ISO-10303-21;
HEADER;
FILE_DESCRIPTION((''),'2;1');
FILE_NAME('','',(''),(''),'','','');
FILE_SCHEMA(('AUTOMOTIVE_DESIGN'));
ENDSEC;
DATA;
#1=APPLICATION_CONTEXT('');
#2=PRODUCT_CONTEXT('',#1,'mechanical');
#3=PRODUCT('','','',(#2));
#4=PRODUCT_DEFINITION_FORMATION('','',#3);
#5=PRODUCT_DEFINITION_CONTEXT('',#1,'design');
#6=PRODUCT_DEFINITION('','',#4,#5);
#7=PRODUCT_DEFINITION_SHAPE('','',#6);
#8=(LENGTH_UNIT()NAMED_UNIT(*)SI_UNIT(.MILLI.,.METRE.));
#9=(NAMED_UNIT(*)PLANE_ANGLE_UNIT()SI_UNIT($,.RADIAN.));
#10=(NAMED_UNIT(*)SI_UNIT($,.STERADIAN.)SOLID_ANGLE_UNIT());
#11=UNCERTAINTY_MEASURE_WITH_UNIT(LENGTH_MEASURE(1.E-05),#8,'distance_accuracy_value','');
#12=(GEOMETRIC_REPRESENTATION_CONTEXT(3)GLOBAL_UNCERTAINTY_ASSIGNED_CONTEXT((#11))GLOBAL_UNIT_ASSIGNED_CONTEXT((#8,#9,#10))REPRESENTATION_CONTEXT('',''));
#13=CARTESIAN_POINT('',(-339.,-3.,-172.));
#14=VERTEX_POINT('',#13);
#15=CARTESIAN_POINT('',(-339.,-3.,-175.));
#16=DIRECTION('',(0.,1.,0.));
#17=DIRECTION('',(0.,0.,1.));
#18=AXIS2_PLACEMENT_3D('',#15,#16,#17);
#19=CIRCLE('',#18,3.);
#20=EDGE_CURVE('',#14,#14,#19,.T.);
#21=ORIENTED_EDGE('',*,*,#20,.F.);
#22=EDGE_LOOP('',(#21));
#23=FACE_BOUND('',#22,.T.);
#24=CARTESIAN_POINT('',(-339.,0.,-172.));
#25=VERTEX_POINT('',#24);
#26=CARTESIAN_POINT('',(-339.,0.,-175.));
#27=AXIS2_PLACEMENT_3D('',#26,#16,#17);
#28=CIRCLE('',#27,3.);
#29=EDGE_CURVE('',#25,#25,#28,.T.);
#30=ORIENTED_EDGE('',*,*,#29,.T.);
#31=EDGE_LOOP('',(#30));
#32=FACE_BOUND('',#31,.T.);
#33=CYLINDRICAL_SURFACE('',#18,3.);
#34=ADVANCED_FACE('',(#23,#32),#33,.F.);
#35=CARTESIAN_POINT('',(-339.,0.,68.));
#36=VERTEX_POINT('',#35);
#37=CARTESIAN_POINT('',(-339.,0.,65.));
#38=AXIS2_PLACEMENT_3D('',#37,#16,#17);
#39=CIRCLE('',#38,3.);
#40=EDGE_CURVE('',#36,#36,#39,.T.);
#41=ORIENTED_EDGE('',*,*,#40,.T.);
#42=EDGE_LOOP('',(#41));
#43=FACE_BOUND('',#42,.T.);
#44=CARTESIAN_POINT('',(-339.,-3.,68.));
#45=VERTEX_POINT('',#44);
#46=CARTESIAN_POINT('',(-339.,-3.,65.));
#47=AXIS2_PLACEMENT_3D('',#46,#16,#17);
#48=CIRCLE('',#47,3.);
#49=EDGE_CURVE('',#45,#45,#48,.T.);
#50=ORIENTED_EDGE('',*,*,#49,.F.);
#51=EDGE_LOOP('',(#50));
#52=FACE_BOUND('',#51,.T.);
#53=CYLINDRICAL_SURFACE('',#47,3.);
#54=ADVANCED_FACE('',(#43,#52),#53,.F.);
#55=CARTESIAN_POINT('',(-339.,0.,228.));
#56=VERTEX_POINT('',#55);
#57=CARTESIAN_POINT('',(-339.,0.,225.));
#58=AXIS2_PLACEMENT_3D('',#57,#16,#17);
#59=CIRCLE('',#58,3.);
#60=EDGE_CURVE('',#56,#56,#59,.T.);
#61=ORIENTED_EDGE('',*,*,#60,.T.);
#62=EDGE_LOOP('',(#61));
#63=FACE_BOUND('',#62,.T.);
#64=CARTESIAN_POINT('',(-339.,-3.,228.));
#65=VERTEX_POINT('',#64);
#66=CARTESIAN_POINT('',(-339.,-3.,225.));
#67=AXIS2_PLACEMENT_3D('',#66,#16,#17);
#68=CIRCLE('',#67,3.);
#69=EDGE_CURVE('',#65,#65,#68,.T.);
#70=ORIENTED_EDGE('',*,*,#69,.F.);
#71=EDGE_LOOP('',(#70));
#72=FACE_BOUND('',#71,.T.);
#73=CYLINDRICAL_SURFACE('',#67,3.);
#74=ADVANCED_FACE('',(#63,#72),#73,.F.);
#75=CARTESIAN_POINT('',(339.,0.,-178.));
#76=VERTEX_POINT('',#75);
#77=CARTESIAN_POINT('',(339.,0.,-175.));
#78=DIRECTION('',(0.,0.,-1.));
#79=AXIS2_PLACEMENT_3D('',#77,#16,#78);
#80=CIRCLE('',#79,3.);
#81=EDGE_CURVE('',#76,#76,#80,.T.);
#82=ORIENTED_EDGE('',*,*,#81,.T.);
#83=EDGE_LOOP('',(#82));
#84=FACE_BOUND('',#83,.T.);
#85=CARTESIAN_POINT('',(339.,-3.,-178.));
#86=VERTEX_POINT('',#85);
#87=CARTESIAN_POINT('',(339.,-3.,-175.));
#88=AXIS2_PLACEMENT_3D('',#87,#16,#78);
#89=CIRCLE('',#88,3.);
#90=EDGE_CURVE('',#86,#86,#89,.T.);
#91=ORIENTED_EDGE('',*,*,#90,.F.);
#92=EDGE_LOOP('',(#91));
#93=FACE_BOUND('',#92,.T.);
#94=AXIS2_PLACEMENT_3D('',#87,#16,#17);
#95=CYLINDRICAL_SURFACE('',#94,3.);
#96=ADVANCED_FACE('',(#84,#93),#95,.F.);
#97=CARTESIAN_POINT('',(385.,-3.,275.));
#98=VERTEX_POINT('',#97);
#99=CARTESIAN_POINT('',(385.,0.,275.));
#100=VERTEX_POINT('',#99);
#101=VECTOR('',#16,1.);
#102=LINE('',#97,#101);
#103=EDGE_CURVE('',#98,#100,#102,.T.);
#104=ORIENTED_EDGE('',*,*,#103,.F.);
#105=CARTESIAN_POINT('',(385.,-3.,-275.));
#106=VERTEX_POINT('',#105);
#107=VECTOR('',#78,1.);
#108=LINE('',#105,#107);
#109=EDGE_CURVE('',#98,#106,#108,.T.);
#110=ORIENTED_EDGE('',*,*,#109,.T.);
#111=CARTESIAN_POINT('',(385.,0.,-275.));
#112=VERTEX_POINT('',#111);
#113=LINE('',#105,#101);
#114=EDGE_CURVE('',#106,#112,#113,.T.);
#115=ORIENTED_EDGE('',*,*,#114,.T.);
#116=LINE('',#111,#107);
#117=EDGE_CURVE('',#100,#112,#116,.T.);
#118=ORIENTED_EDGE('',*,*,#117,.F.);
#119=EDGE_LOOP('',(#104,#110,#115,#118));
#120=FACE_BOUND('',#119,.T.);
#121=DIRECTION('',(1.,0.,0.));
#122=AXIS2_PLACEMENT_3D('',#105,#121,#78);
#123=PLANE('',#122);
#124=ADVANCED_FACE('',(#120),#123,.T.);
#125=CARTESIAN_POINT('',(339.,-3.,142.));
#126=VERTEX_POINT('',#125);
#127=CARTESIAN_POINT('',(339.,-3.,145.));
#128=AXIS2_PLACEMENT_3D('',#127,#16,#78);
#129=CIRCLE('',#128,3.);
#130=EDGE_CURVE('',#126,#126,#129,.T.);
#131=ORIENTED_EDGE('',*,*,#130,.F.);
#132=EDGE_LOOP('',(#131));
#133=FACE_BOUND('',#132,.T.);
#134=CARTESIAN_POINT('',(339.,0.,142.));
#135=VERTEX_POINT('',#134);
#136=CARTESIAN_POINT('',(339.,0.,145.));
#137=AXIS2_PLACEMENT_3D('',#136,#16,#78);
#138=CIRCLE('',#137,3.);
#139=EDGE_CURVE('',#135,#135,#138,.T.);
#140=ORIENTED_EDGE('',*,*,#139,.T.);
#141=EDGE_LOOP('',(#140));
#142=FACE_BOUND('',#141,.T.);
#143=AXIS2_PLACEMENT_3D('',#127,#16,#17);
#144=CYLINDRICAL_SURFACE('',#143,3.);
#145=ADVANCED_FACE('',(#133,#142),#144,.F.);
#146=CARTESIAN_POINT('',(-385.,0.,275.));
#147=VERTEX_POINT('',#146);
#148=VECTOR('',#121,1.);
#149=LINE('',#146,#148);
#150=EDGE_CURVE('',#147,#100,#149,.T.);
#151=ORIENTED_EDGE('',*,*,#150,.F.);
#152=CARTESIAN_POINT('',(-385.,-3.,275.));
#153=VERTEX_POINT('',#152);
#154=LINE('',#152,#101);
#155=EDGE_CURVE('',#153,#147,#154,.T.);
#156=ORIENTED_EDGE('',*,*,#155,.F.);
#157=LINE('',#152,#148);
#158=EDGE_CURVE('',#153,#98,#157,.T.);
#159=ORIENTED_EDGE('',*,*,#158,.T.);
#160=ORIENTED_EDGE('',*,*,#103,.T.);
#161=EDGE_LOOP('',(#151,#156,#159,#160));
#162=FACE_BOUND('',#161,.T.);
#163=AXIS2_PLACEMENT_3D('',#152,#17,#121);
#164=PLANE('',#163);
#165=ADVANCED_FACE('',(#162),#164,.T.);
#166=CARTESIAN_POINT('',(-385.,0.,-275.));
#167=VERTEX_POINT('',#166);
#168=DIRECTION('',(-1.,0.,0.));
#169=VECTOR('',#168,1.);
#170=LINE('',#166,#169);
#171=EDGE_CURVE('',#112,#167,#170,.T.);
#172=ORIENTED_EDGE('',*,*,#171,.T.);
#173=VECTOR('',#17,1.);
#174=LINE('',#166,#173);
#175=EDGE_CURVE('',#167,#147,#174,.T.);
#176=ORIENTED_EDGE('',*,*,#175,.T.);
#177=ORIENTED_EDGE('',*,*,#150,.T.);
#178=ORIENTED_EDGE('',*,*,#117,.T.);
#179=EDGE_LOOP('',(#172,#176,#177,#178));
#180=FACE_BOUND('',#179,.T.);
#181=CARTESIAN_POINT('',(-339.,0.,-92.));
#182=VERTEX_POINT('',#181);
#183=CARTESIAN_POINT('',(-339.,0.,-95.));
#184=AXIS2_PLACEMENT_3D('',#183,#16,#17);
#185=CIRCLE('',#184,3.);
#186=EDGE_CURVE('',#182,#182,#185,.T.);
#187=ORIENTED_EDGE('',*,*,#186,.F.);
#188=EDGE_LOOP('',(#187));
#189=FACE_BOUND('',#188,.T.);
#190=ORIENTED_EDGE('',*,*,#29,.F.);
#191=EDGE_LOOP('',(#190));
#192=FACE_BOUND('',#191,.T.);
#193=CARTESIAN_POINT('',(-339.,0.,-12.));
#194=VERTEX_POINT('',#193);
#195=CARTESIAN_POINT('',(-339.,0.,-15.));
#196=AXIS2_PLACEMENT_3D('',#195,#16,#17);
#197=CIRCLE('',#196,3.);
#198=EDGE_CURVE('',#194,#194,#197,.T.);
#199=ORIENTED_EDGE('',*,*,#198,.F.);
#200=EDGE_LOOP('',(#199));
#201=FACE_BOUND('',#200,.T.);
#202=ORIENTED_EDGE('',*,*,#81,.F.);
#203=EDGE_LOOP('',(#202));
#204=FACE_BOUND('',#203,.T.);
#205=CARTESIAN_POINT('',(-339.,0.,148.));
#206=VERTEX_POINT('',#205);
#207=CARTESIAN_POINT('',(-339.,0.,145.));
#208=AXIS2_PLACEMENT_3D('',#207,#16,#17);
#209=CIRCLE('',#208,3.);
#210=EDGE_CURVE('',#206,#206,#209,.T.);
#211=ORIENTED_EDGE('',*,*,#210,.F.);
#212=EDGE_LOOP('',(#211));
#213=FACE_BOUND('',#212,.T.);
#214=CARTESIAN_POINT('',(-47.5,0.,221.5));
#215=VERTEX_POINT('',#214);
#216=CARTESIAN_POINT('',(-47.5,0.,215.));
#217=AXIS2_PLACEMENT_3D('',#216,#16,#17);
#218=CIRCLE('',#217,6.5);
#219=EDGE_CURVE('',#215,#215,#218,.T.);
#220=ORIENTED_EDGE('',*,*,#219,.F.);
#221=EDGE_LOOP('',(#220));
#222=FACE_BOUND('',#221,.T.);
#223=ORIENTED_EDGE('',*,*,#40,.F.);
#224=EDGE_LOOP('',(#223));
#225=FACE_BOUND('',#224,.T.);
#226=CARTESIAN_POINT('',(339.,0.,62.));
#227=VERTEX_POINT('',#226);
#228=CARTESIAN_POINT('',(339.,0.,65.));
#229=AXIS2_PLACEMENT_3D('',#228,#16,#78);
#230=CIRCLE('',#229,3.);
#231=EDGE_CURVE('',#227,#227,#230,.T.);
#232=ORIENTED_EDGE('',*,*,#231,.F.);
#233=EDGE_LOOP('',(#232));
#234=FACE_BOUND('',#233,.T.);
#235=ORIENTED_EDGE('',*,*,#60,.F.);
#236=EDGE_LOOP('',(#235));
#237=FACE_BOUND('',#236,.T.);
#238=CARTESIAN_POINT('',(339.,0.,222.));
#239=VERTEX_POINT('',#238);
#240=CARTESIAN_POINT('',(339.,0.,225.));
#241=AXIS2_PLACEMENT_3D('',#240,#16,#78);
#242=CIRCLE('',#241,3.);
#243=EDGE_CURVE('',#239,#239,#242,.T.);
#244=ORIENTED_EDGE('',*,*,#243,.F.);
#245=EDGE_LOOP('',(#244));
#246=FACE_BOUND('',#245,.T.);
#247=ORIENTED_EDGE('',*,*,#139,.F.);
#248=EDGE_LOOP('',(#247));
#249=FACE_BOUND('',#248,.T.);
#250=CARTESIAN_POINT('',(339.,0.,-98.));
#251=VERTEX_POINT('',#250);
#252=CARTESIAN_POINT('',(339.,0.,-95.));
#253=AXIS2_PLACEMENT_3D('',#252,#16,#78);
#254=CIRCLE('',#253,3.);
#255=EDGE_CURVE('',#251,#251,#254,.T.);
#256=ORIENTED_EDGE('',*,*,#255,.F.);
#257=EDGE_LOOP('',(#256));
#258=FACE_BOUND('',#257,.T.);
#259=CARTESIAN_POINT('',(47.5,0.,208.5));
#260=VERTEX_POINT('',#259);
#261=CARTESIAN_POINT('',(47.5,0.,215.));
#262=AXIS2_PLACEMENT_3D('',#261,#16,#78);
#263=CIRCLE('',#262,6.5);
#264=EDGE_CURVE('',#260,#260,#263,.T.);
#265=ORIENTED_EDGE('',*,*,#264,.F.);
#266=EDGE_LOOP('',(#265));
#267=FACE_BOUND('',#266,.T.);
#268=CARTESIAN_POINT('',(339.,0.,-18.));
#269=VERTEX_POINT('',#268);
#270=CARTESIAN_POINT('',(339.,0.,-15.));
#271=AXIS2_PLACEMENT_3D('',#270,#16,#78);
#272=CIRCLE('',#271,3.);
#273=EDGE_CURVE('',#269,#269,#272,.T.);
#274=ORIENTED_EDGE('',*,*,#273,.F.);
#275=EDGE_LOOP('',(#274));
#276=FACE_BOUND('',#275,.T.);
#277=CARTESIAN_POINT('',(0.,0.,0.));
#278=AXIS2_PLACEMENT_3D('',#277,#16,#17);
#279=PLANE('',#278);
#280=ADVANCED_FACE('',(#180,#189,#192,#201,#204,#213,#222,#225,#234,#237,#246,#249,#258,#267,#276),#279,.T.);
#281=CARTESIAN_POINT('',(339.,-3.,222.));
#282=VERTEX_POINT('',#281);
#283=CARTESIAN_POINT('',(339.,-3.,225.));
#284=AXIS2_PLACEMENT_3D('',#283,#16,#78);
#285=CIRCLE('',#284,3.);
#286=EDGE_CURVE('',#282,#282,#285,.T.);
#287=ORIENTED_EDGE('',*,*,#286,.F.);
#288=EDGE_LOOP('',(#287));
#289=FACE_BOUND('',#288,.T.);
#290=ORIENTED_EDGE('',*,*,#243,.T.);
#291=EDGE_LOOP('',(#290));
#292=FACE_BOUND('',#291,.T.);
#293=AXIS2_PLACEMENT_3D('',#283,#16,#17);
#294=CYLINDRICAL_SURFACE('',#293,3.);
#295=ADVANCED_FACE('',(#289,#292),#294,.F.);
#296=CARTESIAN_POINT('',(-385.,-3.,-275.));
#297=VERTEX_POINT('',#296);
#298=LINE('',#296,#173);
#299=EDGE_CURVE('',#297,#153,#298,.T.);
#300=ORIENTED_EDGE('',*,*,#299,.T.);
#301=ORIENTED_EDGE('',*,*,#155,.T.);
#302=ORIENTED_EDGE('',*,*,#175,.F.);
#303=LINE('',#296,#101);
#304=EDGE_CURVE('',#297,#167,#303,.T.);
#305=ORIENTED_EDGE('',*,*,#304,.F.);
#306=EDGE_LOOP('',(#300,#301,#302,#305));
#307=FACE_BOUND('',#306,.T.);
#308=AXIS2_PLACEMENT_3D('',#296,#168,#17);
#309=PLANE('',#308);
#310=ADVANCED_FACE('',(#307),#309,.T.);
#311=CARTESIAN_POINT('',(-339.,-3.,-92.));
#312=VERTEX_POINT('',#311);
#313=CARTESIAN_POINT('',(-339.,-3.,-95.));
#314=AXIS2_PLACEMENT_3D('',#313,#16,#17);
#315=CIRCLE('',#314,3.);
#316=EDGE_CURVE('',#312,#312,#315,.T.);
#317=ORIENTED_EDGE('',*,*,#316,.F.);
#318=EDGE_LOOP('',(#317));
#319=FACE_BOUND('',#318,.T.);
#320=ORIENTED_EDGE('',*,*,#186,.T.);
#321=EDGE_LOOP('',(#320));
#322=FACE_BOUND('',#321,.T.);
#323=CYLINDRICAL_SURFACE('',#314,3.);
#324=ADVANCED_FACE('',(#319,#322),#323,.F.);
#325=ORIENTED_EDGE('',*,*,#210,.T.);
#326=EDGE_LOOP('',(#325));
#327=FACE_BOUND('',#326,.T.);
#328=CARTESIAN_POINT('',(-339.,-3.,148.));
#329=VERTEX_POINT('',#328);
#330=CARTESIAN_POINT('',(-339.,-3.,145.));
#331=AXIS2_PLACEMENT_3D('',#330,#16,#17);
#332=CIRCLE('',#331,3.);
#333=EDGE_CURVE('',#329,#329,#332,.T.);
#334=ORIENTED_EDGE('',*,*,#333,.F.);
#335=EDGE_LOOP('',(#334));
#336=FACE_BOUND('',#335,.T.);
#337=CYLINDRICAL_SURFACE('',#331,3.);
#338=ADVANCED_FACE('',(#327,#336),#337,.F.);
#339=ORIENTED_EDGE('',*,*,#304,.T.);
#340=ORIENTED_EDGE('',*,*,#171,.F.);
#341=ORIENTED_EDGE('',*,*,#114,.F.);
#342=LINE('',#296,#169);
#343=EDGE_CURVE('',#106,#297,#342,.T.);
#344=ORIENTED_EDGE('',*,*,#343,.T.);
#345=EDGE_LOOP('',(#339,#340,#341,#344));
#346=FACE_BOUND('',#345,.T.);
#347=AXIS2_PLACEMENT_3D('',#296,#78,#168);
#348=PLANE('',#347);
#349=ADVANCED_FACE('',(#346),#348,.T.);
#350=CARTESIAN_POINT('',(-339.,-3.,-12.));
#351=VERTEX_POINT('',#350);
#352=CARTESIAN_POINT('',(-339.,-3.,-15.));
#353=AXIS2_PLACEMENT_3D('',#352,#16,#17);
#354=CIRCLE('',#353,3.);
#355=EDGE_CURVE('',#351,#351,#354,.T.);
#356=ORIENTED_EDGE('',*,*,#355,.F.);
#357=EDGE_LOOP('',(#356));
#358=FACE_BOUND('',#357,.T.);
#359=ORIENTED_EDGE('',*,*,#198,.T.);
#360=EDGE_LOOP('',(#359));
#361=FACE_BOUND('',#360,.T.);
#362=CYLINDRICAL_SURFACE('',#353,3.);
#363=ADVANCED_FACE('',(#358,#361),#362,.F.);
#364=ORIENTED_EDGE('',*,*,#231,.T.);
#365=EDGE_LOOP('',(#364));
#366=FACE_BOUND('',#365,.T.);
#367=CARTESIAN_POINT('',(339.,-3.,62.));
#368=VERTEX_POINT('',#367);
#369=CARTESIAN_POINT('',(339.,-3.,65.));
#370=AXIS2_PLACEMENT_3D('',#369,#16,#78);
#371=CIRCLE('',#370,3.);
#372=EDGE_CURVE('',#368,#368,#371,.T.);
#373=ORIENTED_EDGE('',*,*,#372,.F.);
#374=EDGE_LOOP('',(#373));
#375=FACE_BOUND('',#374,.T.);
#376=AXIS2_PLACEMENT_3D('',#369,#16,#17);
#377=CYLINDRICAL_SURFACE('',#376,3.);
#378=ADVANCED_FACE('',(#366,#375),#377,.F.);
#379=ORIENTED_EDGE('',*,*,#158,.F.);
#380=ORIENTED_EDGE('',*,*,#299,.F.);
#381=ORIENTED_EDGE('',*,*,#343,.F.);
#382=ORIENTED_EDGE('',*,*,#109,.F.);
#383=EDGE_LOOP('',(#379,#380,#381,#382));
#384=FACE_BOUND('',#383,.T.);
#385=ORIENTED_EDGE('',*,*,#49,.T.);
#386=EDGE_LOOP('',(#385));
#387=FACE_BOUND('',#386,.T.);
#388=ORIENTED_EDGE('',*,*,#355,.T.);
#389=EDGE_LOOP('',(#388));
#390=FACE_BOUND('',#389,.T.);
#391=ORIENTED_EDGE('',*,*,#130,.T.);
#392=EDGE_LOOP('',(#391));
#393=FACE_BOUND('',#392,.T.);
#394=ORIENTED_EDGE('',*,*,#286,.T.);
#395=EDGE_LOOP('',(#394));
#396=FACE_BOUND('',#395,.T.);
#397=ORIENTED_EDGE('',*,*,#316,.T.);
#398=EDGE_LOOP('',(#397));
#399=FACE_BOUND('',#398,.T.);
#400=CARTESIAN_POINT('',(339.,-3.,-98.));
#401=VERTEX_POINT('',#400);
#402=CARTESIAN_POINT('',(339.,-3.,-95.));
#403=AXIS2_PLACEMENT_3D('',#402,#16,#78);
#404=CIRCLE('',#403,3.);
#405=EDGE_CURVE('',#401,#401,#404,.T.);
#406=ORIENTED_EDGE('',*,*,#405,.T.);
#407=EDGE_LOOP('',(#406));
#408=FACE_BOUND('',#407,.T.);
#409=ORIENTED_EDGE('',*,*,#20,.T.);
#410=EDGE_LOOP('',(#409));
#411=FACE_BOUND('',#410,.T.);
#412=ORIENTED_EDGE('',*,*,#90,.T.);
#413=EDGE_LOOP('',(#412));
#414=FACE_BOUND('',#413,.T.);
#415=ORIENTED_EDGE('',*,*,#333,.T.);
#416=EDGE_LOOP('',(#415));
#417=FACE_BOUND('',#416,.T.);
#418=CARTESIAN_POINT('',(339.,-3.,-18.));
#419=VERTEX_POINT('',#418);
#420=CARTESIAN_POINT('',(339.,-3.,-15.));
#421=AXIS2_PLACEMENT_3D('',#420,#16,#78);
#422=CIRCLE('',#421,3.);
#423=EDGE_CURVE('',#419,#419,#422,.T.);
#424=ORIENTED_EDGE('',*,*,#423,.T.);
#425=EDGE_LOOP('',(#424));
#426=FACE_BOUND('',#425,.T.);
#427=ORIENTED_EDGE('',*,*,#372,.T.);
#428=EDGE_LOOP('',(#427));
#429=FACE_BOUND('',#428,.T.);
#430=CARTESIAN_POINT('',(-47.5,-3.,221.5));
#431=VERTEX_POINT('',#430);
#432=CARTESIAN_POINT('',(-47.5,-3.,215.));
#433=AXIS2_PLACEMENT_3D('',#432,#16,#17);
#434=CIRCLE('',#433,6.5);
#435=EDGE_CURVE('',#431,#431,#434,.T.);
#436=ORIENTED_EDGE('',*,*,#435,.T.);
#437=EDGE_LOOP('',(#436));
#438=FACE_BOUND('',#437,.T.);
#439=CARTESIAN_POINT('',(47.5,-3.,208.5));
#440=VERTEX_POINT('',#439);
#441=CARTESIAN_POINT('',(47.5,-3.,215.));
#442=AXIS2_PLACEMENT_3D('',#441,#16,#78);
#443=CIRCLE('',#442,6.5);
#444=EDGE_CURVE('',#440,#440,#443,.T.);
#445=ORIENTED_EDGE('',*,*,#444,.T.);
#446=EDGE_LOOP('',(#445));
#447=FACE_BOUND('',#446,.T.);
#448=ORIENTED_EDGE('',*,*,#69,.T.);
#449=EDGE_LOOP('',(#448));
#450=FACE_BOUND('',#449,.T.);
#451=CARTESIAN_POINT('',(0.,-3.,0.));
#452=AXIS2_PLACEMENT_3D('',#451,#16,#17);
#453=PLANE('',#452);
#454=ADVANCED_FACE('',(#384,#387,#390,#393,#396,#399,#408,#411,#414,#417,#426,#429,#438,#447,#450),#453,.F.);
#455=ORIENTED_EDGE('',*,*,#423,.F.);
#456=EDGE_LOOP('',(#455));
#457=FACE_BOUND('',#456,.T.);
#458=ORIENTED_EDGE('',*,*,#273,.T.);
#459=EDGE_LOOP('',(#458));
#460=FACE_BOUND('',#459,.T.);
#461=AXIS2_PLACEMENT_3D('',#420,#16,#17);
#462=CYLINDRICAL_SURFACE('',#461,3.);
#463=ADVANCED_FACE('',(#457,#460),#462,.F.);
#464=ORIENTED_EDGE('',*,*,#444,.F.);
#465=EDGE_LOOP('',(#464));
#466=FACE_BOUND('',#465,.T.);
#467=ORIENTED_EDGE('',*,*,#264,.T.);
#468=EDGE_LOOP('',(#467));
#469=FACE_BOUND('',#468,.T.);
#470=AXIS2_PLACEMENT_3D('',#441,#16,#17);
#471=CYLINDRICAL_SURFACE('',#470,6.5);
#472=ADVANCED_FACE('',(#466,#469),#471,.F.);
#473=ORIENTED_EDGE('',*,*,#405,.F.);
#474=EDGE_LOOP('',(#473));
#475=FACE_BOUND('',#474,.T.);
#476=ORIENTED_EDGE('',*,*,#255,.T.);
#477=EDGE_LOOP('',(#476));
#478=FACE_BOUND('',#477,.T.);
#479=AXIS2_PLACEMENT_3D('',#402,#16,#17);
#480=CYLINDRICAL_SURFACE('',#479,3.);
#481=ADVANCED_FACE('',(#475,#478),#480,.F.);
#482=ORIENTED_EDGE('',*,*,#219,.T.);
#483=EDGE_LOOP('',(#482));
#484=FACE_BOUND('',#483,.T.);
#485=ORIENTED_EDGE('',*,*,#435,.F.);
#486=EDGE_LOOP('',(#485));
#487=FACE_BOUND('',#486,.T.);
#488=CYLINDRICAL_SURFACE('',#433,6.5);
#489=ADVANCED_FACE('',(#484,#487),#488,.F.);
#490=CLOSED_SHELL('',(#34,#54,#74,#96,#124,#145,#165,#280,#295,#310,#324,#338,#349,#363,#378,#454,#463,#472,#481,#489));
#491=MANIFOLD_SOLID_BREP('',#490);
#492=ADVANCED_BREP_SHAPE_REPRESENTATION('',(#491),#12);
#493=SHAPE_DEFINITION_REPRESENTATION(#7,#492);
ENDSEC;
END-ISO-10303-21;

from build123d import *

# Parameters (mm, degrees)
SKETCH1_W          = 770
SKETCH1_H          = 550
SKETCH1_R          = 3
SKETCH1_R_2        = 6.5
BASE_FLANGE1_DEPTH = 3


# Sheet-metal steps are written as plain solids
with BuildPart() as part:
    # Sketch1 → Base-Flange1 (new body)
    with BuildSketch(Plane(origin=(0, 0, 0), x_dir=(1, 0, 0), z_dir=(0, 1, 0))):
        Rectangle(SKETCH1_W, SKETCH1_H)
        with Locations(Location((-339, 175, 0), (0, 0, 270))):
            Circle(SKETCH1_R, mode=Mode.SUBTRACT)
        with Locations(Location((-339, 95, 0), (0, 0, 270))):
            Circle(SKETCH1_R, mode=Mode.SUBTRACT)
        with Locations(Location((-339, 15, 0), (0, 0, 270))):
            Circle(SKETCH1_R, mode=Mode.SUBTRACT)
        with Locations(Location((-339, -65, 0), (0, 0, 270))):
            Circle(SKETCH1_R, mode=Mode.SUBTRACT)
        with Locations(Location((-339, -145, 0), (0, 0, 270))):
            Circle(SKETCH1_R, mode=Mode.SUBTRACT)
        with Locations(Location((-339, -225, 0), (0, 0, 270))):
            Circle(SKETCH1_R, mode=Mode.SUBTRACT)
        with Locations(Location((339, -225, 0), (0, 0, 90))):
            Circle(SKETCH1_R, mode=Mode.SUBTRACT)
        with Locations(Location((339, -145, 0), (0, 0, 90))):
            Circle(SKETCH1_R, mode=Mode.SUBTRACT)
        with Locations(Location((339, -65, 0), (0, 0, 90))):
            Circle(SKETCH1_R, mode=Mode.SUBTRACT)
        with Locations(Location((339, 15, 0), (0, 0, 90))):
            Circle(SKETCH1_R, mode=Mode.SUBTRACT)
        with Locations(Location((339, 95, 0), (0, 0, 90))):
            Circle(SKETCH1_R, mode=Mode.SUBTRACT)
        with Locations(Location((339, 175, 0), (0, 0, 90))):
            Circle(SKETCH1_R, mode=Mode.SUBTRACT)
        with Locations(Location((-47.5, -215, 0), (0, 0, 270))):
            Circle(SKETCH1_R_2, mode=Mode.SUBTRACT)
        with Locations(Location((47.5, -215, 0), (0, 0, 90))):
            Circle(SKETCH1_R_2, mode=Mode.SUBTRACT)
    extrude(amount=-BASE_FLANGE1_DEPTH)


solid = part.part
